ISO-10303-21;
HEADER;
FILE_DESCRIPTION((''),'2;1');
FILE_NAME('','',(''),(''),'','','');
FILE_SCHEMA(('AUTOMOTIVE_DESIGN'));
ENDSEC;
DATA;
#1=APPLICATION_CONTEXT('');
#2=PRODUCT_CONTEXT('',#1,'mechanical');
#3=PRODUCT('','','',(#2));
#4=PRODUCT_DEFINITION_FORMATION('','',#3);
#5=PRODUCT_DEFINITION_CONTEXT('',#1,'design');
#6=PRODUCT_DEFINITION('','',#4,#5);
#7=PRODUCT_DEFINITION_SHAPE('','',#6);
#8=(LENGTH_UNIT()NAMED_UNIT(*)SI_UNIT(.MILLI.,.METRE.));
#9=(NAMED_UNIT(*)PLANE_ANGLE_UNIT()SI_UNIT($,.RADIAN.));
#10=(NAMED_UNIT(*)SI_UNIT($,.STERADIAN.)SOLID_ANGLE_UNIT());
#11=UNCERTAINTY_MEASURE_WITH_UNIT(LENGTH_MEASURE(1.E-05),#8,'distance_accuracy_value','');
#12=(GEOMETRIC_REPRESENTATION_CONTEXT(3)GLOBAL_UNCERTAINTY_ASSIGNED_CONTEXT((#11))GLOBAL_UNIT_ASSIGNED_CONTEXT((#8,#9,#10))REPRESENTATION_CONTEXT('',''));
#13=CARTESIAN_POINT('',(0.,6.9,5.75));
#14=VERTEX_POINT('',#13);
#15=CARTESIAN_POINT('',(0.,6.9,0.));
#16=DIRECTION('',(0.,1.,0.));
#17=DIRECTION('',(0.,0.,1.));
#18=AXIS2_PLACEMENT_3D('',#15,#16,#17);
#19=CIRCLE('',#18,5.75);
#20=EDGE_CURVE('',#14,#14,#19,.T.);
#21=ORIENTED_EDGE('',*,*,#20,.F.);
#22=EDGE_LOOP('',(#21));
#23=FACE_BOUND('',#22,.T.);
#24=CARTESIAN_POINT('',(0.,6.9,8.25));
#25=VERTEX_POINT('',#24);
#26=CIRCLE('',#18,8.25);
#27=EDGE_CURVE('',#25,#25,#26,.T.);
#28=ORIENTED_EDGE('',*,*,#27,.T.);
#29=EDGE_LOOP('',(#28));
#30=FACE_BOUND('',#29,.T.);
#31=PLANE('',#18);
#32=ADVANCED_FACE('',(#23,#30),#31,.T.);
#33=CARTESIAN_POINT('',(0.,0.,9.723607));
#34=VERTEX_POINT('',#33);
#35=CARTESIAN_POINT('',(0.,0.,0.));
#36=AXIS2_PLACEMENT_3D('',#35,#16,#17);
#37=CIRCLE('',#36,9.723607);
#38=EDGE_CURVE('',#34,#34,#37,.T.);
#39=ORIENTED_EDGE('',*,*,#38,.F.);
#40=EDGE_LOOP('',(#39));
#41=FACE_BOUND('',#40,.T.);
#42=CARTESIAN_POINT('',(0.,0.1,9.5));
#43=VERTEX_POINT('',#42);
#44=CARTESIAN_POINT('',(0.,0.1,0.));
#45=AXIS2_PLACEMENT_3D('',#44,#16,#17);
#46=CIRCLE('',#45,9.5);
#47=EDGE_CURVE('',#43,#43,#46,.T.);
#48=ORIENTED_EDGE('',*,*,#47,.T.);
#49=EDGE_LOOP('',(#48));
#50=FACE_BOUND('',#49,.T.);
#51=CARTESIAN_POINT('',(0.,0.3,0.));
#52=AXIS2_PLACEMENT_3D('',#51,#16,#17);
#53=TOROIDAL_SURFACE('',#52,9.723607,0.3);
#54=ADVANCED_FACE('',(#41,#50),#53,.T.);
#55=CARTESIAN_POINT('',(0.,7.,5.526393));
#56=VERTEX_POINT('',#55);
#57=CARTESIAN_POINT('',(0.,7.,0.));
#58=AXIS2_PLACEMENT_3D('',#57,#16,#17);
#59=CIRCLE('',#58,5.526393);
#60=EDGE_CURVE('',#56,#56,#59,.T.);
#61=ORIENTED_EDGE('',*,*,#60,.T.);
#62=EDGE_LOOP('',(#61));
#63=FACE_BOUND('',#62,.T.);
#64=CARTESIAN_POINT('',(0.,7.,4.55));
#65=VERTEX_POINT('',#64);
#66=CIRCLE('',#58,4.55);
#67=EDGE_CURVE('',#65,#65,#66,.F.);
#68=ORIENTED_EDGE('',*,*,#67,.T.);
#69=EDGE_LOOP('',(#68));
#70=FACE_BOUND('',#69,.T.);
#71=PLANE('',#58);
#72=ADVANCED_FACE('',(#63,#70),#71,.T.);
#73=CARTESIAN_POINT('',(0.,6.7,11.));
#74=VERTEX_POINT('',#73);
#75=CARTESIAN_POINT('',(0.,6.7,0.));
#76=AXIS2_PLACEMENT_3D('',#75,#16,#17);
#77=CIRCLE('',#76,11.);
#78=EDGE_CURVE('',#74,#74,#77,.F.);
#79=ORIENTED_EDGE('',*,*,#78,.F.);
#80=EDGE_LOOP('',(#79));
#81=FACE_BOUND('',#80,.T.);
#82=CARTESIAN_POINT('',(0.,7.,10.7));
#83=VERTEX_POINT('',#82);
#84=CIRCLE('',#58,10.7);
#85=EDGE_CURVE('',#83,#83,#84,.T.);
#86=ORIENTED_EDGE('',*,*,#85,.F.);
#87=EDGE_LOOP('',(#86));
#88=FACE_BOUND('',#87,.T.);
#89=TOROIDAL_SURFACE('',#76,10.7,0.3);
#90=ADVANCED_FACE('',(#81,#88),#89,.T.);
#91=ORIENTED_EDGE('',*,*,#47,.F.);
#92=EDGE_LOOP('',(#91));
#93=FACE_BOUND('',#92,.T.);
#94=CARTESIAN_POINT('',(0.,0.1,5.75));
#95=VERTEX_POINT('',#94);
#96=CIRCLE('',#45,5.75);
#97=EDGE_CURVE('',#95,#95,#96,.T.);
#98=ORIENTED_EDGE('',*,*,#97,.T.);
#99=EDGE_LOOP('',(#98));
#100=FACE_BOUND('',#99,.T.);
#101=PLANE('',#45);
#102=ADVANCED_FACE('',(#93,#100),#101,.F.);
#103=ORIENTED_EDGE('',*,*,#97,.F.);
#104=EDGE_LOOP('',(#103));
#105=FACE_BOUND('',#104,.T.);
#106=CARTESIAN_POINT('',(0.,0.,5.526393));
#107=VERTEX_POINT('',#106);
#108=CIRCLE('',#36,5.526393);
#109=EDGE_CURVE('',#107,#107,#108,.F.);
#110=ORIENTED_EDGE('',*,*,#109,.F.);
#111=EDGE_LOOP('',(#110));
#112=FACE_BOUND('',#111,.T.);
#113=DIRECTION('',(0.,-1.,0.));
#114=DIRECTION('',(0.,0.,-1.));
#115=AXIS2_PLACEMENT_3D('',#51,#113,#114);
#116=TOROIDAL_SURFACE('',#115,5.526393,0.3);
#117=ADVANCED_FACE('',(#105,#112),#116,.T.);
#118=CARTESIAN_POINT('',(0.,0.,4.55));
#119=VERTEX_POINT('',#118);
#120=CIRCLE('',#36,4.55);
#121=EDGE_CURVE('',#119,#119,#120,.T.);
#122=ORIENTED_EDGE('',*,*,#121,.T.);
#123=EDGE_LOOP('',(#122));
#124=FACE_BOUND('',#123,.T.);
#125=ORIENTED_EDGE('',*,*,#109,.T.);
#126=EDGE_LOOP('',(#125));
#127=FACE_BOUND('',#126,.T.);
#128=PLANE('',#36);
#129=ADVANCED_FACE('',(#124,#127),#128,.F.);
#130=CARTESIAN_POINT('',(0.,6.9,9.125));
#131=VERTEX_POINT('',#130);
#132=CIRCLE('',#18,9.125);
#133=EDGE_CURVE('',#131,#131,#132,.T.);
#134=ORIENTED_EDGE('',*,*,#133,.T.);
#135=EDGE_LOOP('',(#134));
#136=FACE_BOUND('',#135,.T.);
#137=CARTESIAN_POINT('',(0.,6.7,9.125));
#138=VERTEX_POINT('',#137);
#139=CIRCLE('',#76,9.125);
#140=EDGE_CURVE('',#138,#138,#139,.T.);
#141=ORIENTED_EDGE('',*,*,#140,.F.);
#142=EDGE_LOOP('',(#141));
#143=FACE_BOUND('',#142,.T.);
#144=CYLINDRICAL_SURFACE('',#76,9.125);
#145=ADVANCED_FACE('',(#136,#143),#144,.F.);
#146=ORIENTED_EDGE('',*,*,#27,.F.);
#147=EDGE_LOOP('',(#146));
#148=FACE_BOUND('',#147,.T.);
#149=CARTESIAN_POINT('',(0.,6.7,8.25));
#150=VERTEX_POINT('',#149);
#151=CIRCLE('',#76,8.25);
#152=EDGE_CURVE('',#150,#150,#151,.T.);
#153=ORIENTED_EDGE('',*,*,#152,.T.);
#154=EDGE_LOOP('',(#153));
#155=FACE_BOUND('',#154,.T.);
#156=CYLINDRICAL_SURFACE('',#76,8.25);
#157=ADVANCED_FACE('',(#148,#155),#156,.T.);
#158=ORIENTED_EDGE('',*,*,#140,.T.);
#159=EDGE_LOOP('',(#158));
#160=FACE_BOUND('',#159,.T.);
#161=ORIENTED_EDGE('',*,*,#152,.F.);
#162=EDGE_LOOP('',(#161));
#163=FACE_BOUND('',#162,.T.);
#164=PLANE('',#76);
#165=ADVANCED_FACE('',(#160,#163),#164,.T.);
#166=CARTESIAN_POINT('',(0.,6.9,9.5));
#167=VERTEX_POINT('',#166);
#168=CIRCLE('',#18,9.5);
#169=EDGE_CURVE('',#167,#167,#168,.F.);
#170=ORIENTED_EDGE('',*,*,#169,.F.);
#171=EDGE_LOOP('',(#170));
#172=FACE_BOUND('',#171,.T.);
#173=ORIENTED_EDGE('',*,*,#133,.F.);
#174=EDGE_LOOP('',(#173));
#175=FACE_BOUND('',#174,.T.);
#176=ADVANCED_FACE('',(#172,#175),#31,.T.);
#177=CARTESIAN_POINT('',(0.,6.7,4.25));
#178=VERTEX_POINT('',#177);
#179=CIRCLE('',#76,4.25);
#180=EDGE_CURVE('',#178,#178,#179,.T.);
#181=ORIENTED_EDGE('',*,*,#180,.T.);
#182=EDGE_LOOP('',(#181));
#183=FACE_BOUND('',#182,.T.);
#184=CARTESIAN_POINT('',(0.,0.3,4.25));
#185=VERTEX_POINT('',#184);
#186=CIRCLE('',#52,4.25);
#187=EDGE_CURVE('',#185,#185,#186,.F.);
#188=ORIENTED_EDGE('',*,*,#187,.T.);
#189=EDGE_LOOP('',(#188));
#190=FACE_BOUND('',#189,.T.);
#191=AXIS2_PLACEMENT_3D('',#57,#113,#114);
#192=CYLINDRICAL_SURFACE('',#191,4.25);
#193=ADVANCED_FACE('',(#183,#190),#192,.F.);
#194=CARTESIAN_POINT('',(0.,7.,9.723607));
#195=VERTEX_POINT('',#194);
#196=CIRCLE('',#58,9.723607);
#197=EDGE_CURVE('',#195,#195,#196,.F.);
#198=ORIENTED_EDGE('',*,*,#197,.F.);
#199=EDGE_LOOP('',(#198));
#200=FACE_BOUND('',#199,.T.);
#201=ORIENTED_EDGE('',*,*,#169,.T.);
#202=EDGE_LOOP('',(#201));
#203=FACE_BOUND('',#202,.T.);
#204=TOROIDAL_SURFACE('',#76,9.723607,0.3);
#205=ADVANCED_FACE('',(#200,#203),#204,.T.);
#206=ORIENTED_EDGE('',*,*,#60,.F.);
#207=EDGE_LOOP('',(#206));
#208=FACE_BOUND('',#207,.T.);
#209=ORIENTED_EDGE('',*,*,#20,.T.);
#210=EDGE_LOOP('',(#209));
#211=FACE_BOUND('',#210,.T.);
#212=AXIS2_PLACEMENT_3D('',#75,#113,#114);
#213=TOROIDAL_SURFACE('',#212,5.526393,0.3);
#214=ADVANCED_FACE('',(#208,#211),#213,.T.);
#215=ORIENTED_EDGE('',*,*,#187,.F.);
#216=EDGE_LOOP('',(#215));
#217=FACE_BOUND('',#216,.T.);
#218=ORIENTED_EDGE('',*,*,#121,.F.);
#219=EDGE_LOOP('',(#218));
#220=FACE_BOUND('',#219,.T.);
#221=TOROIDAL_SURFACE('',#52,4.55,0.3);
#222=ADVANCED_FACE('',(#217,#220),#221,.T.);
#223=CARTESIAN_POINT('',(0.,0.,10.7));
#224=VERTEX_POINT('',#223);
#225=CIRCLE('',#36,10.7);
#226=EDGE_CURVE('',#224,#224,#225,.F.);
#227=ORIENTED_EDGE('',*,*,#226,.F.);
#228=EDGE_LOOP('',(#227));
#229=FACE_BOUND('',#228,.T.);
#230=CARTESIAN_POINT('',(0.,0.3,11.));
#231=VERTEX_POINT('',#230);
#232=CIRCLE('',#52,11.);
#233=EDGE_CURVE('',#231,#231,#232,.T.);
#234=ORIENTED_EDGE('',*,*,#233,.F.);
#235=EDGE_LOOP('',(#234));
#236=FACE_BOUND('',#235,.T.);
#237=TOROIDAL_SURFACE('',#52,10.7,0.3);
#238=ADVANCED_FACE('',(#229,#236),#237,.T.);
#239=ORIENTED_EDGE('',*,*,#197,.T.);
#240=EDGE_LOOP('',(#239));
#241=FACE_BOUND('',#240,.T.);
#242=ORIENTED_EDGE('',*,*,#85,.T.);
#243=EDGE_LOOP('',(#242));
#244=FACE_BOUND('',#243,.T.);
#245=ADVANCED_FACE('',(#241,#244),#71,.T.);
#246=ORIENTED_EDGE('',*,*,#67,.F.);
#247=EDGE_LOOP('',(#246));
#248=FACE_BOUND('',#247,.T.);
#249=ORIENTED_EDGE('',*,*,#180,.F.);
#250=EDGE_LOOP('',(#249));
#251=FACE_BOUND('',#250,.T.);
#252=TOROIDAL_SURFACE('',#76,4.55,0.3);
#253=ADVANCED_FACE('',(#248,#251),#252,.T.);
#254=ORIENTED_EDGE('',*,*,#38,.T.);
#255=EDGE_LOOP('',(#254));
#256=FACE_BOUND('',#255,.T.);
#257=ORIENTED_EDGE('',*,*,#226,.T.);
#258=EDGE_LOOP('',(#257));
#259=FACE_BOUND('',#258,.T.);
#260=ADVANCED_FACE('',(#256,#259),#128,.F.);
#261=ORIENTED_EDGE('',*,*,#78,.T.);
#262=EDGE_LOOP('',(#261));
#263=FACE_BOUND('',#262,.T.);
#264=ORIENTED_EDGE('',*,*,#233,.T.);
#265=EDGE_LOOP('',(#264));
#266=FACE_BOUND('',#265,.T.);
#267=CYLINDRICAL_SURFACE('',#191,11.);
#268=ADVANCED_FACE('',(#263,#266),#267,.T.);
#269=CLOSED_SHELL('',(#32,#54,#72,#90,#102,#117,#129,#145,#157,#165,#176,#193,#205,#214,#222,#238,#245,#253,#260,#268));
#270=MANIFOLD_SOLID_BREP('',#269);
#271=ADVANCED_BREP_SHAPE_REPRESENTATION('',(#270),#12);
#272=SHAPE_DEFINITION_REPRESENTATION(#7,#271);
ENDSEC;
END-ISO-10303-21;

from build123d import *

# Parameters (mm, degrees)
SKETCH1_R           = 5.75
SKETCH1_R_2         = 4.25
BOSS_EXTRUDE1_DEPTH = 7
BOSS_EXTRUDE2_START = 0.1
SKETCH2_R           = 9.5
SKETCH2_R_2         = 5.75
BOSS_EXTRUDE2_DEPTH = 6.8
SKETCH3_R           = 9.125
SKETCH3_R_2         = 8.25
CUT_EXTRUDE1_DEPTH  = 0.2
SKETCH4_R           = 11
SKETCH4_R_2         = 9.5
BOSS_EXTRUDE3_DEPTH = 7
FILLET1_R           = 0.3


with BuildPart() as part:
    # Sketch1 → Boss-Extrude1 (new body)
    with BuildSketch(Plane(origin=(0, 0, 0), x_dir=(1, 0, 0), z_dir=(0, 1, 0))):
        with Locations(Location((0, 0, 0), (0, 0, 270))):
            Circle(SKETCH1_R)
        with Locations(Location((0, 0, 0), (0, 0, 270))):
            Circle(SKETCH1_R_2, mode=Mode.SUBTRACT)
    extrude(amount=BOSS_EXTRUDE1_DEPTH)

    # Sketch2 → Boss-Extrude2 (add)
    with BuildSketch(Plane(origin=(0, 0, 0), x_dir=(1, 0, 0), z_dir=(0, 1, 0)).offset(BOSS_EXTRUDE2_START)):
        with Locations(Location((0, 0, 0), (0, 0, 270))):
            Circle(SKETCH2_R)
        with Locations(Location((0, 0, 0), (0, 0, 270))):
            Circle(SKETCH2_R_2, mode=Mode.SUBTRACT)
    extrude(amount=BOSS_EXTRUDE2_DEPTH)

    # Sketch3 → Cut-Extrude1 (cut)
    with BuildSketch(Plane(origin=(0, 6.9, 0), x_dir=(1, 0, 0), z_dir=(0, 1, 0))):
        with Locations(Location((0, 0, 0), (0, 0, 270))):
            Circle(SKETCH3_R)
        with Locations(Location((0, 0, 0), (0, 0, 270))):
            Circle(SKETCH3_R_2, mode=Mode.SUBTRACT)
    extrude(amount=-CUT_EXTRUDE1_DEPTH, mode=Mode.SUBTRACT)

    # Sketch4 → Boss-Extrude3 (add)
    with BuildSketch(Plane(origin=(0, 0, 0), x_dir=(1, 0, 0), z_dir=(0, 1, 0))):
        with Locations(Location((0, 0, 0), (0, 0, 270))):
            Circle(SKETCH4_R)
        with Locations(Location((0, 0, 0), (0, 0, 270))):
            Circle(SKETCH4_R_2, mode=Mode.SUBTRACT)
    extrude(amount=BOSS_EXTRUDE3_DEPTH)

    # Fillet1
    # the kernel refuses this fillet: 0.3 mm, written as the material it takes off along each edge
    with BuildSketch(Plane(origin=(0, 0, 0), x_dir=(0, 0, 1), z_dir=(-1, 0, 0))) as fillet1_piece_1:
        with BuildLine():
            CenterArc((5.526393202, 0.3), FILLET1_R, 270, 48.189685104)
            Line((5.526393202, 0), (5.526393202, -0.006))
            Line((5.526393202, -0.006), (5.75, -0.006))
            Line((5.75, -0.006), (5.756, 0))
            ThreePointArc((5.756, 0), (5.756, 0.05), (5.754472136, 0.096))
            Line((5.754472136, 0.096), (5.75, 0.1))
        make_face()
    revolve(axis=Axis((0, 0, 0), (0, 1, 0)), mode=Mode.SUBTRACT)
    with BuildSketch(Plane(origin=(0, 7, 0), x_dir=(0, 0, 1), z_dir=(-1, 0, 0))) as fillet1_piece_2:
        with BuildLine():
            CenterArc((11 - FILLET1_R, -FILLET1_R), FILLET1_R, 0, 90)
            Line((11 - FILLET1_R, 0), (11 - FILLET1_R, FILLET1_R * 0.02))
            Line((11 - FILLET1_R, FILLET1_R * 0.02), (11 + FILLET1_R * 0.02, FILLET1_R * 0.02))
            Line((11 + FILLET1_R * 0.02, FILLET1_R * 0.02), (11 + FILLET1_R * 0.02, -FILLET1_R))
            Line((11 + FILLET1_R * 0.02, -FILLET1_R), (11, -FILLET1_R))
        make_face()
    revolve(axis=Axis((0, 7, 0), (0, 1, 0)), mode=Mode.SUBTRACT)
    with BuildSketch(Plane(origin=(0, 0, 0), x_dir=(0, 0, 1), z_dir=(-1, 0, 0))) as fillet1_piece_3:
        with BuildLine():
            CenterArc((9.723606798, 0.3), FILLET1_R, 221.810314896, 48.189685104)
            Line((9.5, 0.1), (9.495527864, 0.096))
            ThreePointArc((9.495527864, 0.096), (9.494, 0.05), (9.494, 0))
            Line((9.494, 0), (9.5, -0.006))
            Line((9.5, -0.006), (9.723606798, -0.006))
            Line((9.723606798, -0.006), (9.723606798, 0))
        make_face()
    revolve(axis=Axis((0, 0, 0), (0, 1, 0)), mode=Mode.SUBTRACT)
    with BuildSketch(Plane(origin=(0, 0, 0), x_dir=(0, 0, 1), z_dir=(-1, 0, 0))) as fillet1_piece_4:
        with BuildLine():
            CenterArc((11 - FILLET1_R, FILLET1_R), FILLET1_R, 270, 90)
            Line((11 - FILLET1_R, 0), (11 - FILLET1_R, -FILLET1_R * 0.02))
            Line((11 - FILLET1_R, -FILLET1_R * 0.02), (11 + FILLET1_R * 0.02, -FILLET1_R * 0.02))
            Line((11 + FILLET1_R * 0.02, -FILLET1_R * 0.02), (11 + FILLET1_R * 0.02, FILLET1_R))
            Line((11 + FILLET1_R * 0.02, FILLET1_R), (11, FILLET1_R))
        make_face()
    revolve(axis=Axis((0, 0, 0), (0, 1, 0)), mode=Mode.SUBTRACT)
    with BuildSketch(Plane(origin=(0, 7, 0), x_dir=(0, 0, 1), z_dir=(-1, 0, 0))) as fillet1_piece_5:
        with BuildLine():
            CenterArc((9.723606798, -0.3), FILLET1_R, 90, 48.189685104)
            Line((9.5, -0.1), (9.495527864, -0.096))
            ThreePointArc((9.495527864, -0.096), (9.494, -0.05), (9.494, 0))
            Line((9.494, 0), (9.5, 0.006))
            Line((9.5, 0.006), (9.723606798, 0.006))
            Line((9.723606798, 0.006), (9.723606798, 0))
        make_face()
    revolve(axis=Axis((0, 7, 0), (0, 1, 0)), mode=Mode.SUBTRACT)
    with BuildSketch(Plane(origin=(0, 7, 0), x_dir=(0, 0, 1), z_dir=(-1, 0, 0))) as fillet1_piece_6:
        with BuildLine():
            CenterArc((5.526393202, -0.3), FILLET1_R, 41.810314896, 48.189685104)
            Line((5.75, -0.1), (5.754472136, -0.096))
            ThreePointArc((5.754472136, -0.096), (5.756, -0.05), (5.756, 0))
            Line((5.756, 0), (5.75, 0.006))
            Line((5.75, 0.006), (5.526393202, 0.006))
            Line((5.526393202, 0.006), (5.526393202, 0))
        make_face()
    revolve(axis=Axis((0, 7, 0), (0, 1, 0)), mode=Mode.SUBTRACT)
    with BuildSketch(Plane(origin=(0, 0, 0), x_dir=(0, 0, 1), z_dir=(-1, 0, 0))) as fillet1_piece_7:
        with BuildLine():
            CenterArc((4.25 + FILLET1_R, FILLET1_R), FILLET1_R, 180, 90)
            Line((4.25, FILLET1_R), (4.25 - FILLET1_R * 0.02, FILLET1_R))
            Line((4.25 - FILLET1_R * 0.02, FILLET1_R), (4.25 - FILLET1_R * 0.02, -FILLET1_R * 0.02))
            Line((4.25 - FILLET1_R * 0.02, -FILLET1_R * 0.02), (4.25 + FILLET1_R, -FILLET1_R * 0.02))
            Line((4.25 + FILLET1_R, -FILLET1_R * 0.02), (4.25 + FILLET1_R, 0))
        make_face()
    revolve(axis=Axis((0, 0, 0), (0, 1, 0)), mode=Mode.SUBTRACT)
    with BuildSketch(Plane(origin=(0, 7, 0), x_dir=(0, 0, 1), z_dir=(-1, 0, 0))) as fillet1_piece_8:
        with BuildLine():
            CenterArc((4.25 + FILLET1_R, -FILLET1_R), FILLET1_R, 90, 90)
            Line((4.25 + FILLET1_R, 0), (4.25 + FILLET1_R, FILLET1_R * 0.02))
            Line((4.25 + FILLET1_R, FILLET1_R * 0.02), (4.25 - FILLET1_R * 0.02, FILLET1_R * 0.02))
            Line((4.25 - FILLET1_R * 0.02, FILLET1_R * 0.02), (4.25 - FILLET1_R * 0.02, -FILLET1_R))
            Line((4.25 - FILLET1_R * 0.02, -FILLET1_R), (4.25, -FILLET1_R))
        make_face()
    revolve(axis=Axis((0, 7, 0), (0, 1, 0)), mode=Mode.SUBTRACT)


solid = part.part
